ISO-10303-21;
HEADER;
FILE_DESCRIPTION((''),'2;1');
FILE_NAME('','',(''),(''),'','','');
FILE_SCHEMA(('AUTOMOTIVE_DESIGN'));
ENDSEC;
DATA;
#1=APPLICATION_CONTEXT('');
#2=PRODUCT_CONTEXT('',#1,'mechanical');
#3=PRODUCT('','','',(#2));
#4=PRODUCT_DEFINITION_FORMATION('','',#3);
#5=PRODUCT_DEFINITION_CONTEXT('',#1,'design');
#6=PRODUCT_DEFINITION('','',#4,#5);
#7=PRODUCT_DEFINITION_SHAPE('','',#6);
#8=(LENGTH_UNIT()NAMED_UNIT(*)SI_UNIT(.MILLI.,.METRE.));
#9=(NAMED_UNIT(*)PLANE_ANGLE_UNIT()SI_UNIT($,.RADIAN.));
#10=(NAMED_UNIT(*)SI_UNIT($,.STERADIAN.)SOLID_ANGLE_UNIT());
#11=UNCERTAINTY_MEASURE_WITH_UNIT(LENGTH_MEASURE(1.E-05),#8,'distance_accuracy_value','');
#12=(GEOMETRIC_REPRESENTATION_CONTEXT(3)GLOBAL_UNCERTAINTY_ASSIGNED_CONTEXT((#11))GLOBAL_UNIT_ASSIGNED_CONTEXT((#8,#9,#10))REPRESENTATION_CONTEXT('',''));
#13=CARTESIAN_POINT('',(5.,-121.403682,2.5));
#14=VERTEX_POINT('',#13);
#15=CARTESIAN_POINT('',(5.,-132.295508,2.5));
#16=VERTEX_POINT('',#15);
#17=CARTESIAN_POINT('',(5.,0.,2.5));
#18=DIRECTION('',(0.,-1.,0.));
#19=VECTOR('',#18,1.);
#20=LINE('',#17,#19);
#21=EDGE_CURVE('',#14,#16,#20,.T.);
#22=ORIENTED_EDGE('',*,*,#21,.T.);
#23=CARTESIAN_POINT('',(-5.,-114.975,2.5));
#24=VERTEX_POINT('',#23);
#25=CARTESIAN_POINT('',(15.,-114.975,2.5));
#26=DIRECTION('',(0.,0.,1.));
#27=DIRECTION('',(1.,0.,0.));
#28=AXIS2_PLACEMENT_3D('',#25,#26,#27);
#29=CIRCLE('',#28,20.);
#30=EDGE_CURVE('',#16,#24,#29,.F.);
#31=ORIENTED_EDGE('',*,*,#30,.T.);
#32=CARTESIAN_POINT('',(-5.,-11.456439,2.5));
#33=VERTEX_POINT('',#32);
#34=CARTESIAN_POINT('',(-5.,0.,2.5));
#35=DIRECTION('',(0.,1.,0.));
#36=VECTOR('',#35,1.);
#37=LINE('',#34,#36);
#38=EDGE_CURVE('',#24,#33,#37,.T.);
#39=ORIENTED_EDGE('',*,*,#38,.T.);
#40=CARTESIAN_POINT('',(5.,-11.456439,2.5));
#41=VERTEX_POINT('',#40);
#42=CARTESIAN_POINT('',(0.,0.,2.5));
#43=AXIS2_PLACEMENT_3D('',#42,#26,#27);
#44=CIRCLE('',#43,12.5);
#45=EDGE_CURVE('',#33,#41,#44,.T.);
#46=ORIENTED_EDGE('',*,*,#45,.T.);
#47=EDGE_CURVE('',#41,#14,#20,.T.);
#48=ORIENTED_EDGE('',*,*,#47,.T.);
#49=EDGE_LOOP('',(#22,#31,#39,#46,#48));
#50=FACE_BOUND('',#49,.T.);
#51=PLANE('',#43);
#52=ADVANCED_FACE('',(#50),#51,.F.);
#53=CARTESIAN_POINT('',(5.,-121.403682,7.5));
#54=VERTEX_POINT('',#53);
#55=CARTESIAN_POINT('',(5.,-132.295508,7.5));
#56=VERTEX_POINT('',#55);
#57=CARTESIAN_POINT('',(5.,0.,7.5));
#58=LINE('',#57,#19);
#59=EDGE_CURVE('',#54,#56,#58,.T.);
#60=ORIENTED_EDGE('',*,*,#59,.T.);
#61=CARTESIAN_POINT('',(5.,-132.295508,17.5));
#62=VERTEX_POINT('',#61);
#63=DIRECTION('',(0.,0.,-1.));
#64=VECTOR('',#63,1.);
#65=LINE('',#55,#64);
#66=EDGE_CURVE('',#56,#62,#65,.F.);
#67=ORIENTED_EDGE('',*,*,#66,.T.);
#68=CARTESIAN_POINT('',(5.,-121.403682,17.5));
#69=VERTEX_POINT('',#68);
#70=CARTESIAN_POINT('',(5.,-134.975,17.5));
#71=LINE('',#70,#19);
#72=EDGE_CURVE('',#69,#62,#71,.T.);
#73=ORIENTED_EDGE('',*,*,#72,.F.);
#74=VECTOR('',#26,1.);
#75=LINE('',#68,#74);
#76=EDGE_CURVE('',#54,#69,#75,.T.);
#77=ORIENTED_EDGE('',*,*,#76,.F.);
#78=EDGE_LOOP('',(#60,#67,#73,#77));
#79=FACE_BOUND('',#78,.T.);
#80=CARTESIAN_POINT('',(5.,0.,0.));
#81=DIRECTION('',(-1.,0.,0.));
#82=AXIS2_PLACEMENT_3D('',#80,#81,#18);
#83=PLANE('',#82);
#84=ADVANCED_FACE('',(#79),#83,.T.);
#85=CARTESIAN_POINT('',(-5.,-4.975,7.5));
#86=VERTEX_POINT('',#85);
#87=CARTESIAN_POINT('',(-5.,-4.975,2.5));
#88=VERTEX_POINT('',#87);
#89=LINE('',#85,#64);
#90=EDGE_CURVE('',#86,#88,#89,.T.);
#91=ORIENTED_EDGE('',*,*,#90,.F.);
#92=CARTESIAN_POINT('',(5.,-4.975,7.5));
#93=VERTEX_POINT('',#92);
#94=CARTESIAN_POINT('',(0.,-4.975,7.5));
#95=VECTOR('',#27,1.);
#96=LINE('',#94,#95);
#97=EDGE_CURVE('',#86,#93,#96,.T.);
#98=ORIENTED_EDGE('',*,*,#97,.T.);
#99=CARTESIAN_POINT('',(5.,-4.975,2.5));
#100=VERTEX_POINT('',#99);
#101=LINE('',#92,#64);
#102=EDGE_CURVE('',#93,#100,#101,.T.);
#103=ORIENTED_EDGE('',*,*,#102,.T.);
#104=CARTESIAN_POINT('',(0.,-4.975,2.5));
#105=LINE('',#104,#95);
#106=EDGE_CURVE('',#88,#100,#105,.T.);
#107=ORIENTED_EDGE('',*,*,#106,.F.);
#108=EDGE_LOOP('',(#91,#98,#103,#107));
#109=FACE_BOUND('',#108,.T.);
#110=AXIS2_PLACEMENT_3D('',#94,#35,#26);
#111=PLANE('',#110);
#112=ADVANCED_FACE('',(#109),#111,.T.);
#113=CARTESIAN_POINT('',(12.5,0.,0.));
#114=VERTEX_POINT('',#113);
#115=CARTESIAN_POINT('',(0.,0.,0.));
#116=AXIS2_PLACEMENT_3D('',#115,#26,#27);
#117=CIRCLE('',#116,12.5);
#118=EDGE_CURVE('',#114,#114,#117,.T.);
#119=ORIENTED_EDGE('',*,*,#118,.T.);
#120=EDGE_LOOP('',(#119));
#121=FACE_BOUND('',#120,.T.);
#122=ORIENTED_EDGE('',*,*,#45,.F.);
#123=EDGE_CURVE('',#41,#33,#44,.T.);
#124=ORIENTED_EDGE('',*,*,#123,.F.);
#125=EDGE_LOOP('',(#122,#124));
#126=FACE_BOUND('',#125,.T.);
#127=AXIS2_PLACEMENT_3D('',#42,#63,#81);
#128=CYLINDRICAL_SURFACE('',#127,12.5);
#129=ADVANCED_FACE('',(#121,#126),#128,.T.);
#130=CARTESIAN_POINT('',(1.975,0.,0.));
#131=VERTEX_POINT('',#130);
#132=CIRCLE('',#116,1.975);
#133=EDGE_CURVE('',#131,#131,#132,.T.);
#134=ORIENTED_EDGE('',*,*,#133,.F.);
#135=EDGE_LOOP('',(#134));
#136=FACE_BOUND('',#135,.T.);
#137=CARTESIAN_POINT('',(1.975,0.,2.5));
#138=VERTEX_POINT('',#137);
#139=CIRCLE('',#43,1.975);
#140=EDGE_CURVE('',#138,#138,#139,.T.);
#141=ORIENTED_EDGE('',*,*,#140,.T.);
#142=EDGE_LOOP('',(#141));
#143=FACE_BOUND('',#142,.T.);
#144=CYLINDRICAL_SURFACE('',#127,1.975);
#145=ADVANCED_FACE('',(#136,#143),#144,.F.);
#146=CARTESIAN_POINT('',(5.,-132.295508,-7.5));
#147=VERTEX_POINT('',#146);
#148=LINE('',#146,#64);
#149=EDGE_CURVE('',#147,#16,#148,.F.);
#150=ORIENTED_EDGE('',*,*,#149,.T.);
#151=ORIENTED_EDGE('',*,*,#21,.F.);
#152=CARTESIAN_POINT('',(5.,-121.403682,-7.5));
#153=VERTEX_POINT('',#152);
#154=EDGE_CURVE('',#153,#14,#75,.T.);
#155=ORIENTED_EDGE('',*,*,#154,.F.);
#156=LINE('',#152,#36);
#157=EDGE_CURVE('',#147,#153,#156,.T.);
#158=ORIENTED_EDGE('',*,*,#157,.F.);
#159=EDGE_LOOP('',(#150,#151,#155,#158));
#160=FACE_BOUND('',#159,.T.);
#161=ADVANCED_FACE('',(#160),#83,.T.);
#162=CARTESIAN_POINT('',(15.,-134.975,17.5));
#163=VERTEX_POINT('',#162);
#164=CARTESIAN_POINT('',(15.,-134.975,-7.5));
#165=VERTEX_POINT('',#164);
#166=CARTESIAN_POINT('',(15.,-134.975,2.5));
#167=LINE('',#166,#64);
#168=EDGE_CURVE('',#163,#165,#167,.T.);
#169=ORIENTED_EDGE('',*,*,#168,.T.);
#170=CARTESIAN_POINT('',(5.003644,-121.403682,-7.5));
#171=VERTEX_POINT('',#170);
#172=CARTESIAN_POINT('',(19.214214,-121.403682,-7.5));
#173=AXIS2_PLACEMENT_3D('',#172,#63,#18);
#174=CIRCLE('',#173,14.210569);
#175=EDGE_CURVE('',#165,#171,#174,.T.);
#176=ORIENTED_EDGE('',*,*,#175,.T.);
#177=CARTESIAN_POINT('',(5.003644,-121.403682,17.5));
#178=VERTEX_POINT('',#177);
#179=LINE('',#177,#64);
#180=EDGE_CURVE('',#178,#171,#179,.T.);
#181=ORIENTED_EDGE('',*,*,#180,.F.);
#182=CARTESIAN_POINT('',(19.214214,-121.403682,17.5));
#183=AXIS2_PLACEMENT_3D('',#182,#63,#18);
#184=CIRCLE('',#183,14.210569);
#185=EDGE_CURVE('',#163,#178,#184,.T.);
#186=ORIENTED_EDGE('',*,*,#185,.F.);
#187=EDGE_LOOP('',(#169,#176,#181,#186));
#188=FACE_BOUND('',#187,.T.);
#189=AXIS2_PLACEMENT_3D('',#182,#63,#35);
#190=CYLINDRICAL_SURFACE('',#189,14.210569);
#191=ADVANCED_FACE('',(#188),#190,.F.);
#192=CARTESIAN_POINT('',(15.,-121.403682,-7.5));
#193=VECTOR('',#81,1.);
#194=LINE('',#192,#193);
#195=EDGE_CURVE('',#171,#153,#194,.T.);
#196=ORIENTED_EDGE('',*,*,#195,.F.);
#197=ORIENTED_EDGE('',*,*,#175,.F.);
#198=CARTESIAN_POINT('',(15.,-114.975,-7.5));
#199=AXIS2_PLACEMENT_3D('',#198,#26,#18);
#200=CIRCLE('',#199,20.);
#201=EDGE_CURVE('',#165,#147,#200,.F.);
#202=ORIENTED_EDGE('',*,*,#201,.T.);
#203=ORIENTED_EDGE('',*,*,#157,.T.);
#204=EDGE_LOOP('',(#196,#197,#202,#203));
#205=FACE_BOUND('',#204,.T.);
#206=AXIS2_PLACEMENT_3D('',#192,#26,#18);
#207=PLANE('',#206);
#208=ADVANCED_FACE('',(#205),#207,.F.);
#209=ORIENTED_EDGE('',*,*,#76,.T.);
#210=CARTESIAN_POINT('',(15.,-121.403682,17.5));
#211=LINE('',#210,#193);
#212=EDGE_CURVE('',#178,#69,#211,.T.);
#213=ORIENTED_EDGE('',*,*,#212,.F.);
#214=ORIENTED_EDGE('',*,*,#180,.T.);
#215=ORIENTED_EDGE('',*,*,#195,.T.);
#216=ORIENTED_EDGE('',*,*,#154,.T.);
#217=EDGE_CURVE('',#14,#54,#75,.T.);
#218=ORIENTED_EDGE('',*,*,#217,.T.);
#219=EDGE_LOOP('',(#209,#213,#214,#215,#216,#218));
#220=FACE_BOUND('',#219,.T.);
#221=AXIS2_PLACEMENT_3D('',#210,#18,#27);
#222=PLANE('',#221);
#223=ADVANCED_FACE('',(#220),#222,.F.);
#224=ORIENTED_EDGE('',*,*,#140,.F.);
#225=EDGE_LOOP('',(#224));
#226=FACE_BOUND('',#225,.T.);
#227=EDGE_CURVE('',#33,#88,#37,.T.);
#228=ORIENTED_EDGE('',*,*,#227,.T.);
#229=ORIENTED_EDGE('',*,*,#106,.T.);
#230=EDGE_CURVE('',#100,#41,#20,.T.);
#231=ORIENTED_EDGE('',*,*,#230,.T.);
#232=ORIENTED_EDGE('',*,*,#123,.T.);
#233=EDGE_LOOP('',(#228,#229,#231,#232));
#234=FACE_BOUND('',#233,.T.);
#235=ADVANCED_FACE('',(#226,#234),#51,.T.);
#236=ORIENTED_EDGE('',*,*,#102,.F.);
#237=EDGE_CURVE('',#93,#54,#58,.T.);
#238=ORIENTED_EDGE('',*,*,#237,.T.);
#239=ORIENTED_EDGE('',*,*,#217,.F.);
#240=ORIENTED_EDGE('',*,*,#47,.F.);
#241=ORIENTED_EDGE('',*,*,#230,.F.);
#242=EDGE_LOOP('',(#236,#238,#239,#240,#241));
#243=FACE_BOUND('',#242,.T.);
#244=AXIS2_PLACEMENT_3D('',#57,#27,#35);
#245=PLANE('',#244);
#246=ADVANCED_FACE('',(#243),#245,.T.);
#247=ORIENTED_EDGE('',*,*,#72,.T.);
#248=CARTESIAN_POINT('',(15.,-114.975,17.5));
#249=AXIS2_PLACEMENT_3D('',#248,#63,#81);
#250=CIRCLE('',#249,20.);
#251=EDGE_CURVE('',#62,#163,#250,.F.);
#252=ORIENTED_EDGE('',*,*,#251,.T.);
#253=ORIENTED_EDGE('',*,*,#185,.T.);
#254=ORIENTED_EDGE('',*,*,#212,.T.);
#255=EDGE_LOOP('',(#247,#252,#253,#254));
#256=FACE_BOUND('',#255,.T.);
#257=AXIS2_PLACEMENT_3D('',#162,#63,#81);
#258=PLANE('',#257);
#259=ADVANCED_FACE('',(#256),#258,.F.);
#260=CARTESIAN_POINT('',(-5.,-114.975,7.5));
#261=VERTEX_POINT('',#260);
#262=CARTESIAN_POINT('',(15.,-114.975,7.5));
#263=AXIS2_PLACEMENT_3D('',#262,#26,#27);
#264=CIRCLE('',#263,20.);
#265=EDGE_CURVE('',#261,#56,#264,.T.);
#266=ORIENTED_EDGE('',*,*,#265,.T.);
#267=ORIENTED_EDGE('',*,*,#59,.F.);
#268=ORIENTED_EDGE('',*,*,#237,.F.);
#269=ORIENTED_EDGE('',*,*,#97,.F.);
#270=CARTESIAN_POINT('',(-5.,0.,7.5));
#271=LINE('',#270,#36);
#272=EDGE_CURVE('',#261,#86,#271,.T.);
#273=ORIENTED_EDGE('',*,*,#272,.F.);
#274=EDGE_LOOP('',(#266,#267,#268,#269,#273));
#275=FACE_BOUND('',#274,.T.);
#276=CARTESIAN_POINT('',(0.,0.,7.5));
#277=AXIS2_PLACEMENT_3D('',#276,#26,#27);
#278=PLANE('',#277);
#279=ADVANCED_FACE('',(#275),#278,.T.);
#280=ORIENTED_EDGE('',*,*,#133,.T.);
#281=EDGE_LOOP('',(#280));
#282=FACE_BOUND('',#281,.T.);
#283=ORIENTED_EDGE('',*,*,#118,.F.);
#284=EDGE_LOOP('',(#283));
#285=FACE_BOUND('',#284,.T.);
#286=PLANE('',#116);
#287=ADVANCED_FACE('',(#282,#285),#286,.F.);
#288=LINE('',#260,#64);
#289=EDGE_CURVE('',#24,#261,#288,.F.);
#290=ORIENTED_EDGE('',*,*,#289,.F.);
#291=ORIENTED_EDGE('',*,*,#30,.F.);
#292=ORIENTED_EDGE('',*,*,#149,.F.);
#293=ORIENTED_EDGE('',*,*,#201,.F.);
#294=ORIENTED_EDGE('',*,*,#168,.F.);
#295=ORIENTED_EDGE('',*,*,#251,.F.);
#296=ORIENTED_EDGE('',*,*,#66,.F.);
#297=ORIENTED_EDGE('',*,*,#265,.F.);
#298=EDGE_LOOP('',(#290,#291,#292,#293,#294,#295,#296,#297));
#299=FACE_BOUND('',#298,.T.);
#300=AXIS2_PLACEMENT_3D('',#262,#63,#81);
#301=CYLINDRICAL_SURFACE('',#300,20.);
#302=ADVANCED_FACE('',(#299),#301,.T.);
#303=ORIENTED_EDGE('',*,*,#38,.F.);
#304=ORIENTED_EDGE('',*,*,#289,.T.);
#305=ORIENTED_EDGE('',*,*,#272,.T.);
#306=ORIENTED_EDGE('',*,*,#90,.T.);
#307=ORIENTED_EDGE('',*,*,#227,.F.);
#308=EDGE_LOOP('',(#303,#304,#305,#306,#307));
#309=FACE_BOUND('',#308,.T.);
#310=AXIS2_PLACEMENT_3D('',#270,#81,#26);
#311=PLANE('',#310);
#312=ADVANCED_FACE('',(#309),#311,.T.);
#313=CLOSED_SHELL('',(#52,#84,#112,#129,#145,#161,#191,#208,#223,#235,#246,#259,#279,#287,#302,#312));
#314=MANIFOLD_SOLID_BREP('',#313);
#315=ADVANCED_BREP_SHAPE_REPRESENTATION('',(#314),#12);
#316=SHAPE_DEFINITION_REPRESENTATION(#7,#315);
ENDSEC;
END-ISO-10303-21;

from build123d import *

# Parameters (mm, degrees)
BOSS_EXTRUDE5_DEPTH  = 2.5
BOSS_EXTRUDE6_DEPTH  = 5
BOSS_EXTRUDE10_DEPTH = 10
CUT_EXTRUDE2_DEPTH   = 139.087836629
FILLET2_R            = 20


with BuildPart() as part:
    # Sketch3 → Boss-Extrude5 (new body)
    with BuildSketch(Plane.XY):
        with BuildLine():
            ThreePointArc((0, 1.975), (1.396535893, 1.396535893), (1.975, 0))
            Line((1.975, 0), (12.5, 0))
            ThreePointArc((12.5, 0), (8.838834765, 8.838834765), (0, 12.5))
            Line((0, 12.5), (0, 1.975))
        make_face()
        with BuildLine():
            Line((12.5, 0), (1.975, 0))
            ThreePointArc((1.975, 0), (1.396535893, -1.396535893), (0, -1.975))
            Line((0, -1.975), (0, -12.5))
            ThreePointArc((0, -12.5), (8.838834765, -8.838834765), (12.5, 0))
        make_face()
        with BuildLine():
            ThreePointArc((0, -1.975), (-1.396535893, -1.396535893), (-1.975, 0))
            Line((-1.975, 0), (-12.5, 0))
            ThreePointArc((-12.5, 0), (-8.838834765, -8.838834765), (0, -12.5))
            Line((0, -12.5), (0, -1.975))
        make_face()
        with BuildLine():
            Line((-12.5, 0), (-1.975, 0))
            ThreePointArc((-1.975, 0), (-1.396535893, 1.396535893), (0, 1.975))
            Line((0, 1.975), (0, 12.5))
            ThreePointArc((0, 12.5), (-8.838834765, 8.838834765), (-12.5, 0))
        make_face()
    extrude(amount=BOSS_EXTRUDE5_DEPTH)

    # Sketch5 → Boss-Extrude6 (add)
    with BuildSketch(Plane.XY.offset(2.5)):
        Polygon((-5, -134.975), (-5, -4.975), (0, -4.975), (5, -4.975), (5, -134.975), align=None)
    extrude(amount=BOSS_EXTRUDE6_DEPTH)

    # Sketch13 → Boss-Extrude10 (add)
    with BuildSketch(Plane(origin=(5, 0, 0), x_dir=(0, 0, -1), z_dir=(1, 0, 0))):
        Polygon((-7.5, -134.975), (-17.5, -134.975), (-17.5, -121.403681616), (-7.5, -121.403681616), (-2.5, -121.403681616), (7.5, -121.403681616), (7.5, -134.975), (-2.5, -134.975), align=None)
    extrude(amount=BOSS_EXTRUDE10_DEPTH)

    # Sketch14 → Cut-Extrude2 (cut, through all)
    with BuildSketch(Plane(origin=(0, 0, -7.5), x_dir=(-1, 0, 0), z_dir=(0, 0, -1))):
        with BuildLine():
            Line((-15, -134.975), (-15, -121.403681616))
            Line((-15, -121.403681616), (-5.003644464, -121.4036816))
            ThreePointArc((-5.003644464, -121.4036816), (-7.772477519, -129.831430515), (-15, -134.975))
        make_face()
    extrude(amount=-CUT_EXTRUDE2_DEPTH, mode=Mode.SUBTRACT)

    # Fillet2
    fillet2_edges = [part.edges().sort_by_distance(p)[0] for p in [
        (-5, -134.975, 5),
    ]]
    fillet(fillet2_edges, radius=FILLET2_R - 0.0001)  # a hair under: the kernel refuses the full size


solid = part.part
